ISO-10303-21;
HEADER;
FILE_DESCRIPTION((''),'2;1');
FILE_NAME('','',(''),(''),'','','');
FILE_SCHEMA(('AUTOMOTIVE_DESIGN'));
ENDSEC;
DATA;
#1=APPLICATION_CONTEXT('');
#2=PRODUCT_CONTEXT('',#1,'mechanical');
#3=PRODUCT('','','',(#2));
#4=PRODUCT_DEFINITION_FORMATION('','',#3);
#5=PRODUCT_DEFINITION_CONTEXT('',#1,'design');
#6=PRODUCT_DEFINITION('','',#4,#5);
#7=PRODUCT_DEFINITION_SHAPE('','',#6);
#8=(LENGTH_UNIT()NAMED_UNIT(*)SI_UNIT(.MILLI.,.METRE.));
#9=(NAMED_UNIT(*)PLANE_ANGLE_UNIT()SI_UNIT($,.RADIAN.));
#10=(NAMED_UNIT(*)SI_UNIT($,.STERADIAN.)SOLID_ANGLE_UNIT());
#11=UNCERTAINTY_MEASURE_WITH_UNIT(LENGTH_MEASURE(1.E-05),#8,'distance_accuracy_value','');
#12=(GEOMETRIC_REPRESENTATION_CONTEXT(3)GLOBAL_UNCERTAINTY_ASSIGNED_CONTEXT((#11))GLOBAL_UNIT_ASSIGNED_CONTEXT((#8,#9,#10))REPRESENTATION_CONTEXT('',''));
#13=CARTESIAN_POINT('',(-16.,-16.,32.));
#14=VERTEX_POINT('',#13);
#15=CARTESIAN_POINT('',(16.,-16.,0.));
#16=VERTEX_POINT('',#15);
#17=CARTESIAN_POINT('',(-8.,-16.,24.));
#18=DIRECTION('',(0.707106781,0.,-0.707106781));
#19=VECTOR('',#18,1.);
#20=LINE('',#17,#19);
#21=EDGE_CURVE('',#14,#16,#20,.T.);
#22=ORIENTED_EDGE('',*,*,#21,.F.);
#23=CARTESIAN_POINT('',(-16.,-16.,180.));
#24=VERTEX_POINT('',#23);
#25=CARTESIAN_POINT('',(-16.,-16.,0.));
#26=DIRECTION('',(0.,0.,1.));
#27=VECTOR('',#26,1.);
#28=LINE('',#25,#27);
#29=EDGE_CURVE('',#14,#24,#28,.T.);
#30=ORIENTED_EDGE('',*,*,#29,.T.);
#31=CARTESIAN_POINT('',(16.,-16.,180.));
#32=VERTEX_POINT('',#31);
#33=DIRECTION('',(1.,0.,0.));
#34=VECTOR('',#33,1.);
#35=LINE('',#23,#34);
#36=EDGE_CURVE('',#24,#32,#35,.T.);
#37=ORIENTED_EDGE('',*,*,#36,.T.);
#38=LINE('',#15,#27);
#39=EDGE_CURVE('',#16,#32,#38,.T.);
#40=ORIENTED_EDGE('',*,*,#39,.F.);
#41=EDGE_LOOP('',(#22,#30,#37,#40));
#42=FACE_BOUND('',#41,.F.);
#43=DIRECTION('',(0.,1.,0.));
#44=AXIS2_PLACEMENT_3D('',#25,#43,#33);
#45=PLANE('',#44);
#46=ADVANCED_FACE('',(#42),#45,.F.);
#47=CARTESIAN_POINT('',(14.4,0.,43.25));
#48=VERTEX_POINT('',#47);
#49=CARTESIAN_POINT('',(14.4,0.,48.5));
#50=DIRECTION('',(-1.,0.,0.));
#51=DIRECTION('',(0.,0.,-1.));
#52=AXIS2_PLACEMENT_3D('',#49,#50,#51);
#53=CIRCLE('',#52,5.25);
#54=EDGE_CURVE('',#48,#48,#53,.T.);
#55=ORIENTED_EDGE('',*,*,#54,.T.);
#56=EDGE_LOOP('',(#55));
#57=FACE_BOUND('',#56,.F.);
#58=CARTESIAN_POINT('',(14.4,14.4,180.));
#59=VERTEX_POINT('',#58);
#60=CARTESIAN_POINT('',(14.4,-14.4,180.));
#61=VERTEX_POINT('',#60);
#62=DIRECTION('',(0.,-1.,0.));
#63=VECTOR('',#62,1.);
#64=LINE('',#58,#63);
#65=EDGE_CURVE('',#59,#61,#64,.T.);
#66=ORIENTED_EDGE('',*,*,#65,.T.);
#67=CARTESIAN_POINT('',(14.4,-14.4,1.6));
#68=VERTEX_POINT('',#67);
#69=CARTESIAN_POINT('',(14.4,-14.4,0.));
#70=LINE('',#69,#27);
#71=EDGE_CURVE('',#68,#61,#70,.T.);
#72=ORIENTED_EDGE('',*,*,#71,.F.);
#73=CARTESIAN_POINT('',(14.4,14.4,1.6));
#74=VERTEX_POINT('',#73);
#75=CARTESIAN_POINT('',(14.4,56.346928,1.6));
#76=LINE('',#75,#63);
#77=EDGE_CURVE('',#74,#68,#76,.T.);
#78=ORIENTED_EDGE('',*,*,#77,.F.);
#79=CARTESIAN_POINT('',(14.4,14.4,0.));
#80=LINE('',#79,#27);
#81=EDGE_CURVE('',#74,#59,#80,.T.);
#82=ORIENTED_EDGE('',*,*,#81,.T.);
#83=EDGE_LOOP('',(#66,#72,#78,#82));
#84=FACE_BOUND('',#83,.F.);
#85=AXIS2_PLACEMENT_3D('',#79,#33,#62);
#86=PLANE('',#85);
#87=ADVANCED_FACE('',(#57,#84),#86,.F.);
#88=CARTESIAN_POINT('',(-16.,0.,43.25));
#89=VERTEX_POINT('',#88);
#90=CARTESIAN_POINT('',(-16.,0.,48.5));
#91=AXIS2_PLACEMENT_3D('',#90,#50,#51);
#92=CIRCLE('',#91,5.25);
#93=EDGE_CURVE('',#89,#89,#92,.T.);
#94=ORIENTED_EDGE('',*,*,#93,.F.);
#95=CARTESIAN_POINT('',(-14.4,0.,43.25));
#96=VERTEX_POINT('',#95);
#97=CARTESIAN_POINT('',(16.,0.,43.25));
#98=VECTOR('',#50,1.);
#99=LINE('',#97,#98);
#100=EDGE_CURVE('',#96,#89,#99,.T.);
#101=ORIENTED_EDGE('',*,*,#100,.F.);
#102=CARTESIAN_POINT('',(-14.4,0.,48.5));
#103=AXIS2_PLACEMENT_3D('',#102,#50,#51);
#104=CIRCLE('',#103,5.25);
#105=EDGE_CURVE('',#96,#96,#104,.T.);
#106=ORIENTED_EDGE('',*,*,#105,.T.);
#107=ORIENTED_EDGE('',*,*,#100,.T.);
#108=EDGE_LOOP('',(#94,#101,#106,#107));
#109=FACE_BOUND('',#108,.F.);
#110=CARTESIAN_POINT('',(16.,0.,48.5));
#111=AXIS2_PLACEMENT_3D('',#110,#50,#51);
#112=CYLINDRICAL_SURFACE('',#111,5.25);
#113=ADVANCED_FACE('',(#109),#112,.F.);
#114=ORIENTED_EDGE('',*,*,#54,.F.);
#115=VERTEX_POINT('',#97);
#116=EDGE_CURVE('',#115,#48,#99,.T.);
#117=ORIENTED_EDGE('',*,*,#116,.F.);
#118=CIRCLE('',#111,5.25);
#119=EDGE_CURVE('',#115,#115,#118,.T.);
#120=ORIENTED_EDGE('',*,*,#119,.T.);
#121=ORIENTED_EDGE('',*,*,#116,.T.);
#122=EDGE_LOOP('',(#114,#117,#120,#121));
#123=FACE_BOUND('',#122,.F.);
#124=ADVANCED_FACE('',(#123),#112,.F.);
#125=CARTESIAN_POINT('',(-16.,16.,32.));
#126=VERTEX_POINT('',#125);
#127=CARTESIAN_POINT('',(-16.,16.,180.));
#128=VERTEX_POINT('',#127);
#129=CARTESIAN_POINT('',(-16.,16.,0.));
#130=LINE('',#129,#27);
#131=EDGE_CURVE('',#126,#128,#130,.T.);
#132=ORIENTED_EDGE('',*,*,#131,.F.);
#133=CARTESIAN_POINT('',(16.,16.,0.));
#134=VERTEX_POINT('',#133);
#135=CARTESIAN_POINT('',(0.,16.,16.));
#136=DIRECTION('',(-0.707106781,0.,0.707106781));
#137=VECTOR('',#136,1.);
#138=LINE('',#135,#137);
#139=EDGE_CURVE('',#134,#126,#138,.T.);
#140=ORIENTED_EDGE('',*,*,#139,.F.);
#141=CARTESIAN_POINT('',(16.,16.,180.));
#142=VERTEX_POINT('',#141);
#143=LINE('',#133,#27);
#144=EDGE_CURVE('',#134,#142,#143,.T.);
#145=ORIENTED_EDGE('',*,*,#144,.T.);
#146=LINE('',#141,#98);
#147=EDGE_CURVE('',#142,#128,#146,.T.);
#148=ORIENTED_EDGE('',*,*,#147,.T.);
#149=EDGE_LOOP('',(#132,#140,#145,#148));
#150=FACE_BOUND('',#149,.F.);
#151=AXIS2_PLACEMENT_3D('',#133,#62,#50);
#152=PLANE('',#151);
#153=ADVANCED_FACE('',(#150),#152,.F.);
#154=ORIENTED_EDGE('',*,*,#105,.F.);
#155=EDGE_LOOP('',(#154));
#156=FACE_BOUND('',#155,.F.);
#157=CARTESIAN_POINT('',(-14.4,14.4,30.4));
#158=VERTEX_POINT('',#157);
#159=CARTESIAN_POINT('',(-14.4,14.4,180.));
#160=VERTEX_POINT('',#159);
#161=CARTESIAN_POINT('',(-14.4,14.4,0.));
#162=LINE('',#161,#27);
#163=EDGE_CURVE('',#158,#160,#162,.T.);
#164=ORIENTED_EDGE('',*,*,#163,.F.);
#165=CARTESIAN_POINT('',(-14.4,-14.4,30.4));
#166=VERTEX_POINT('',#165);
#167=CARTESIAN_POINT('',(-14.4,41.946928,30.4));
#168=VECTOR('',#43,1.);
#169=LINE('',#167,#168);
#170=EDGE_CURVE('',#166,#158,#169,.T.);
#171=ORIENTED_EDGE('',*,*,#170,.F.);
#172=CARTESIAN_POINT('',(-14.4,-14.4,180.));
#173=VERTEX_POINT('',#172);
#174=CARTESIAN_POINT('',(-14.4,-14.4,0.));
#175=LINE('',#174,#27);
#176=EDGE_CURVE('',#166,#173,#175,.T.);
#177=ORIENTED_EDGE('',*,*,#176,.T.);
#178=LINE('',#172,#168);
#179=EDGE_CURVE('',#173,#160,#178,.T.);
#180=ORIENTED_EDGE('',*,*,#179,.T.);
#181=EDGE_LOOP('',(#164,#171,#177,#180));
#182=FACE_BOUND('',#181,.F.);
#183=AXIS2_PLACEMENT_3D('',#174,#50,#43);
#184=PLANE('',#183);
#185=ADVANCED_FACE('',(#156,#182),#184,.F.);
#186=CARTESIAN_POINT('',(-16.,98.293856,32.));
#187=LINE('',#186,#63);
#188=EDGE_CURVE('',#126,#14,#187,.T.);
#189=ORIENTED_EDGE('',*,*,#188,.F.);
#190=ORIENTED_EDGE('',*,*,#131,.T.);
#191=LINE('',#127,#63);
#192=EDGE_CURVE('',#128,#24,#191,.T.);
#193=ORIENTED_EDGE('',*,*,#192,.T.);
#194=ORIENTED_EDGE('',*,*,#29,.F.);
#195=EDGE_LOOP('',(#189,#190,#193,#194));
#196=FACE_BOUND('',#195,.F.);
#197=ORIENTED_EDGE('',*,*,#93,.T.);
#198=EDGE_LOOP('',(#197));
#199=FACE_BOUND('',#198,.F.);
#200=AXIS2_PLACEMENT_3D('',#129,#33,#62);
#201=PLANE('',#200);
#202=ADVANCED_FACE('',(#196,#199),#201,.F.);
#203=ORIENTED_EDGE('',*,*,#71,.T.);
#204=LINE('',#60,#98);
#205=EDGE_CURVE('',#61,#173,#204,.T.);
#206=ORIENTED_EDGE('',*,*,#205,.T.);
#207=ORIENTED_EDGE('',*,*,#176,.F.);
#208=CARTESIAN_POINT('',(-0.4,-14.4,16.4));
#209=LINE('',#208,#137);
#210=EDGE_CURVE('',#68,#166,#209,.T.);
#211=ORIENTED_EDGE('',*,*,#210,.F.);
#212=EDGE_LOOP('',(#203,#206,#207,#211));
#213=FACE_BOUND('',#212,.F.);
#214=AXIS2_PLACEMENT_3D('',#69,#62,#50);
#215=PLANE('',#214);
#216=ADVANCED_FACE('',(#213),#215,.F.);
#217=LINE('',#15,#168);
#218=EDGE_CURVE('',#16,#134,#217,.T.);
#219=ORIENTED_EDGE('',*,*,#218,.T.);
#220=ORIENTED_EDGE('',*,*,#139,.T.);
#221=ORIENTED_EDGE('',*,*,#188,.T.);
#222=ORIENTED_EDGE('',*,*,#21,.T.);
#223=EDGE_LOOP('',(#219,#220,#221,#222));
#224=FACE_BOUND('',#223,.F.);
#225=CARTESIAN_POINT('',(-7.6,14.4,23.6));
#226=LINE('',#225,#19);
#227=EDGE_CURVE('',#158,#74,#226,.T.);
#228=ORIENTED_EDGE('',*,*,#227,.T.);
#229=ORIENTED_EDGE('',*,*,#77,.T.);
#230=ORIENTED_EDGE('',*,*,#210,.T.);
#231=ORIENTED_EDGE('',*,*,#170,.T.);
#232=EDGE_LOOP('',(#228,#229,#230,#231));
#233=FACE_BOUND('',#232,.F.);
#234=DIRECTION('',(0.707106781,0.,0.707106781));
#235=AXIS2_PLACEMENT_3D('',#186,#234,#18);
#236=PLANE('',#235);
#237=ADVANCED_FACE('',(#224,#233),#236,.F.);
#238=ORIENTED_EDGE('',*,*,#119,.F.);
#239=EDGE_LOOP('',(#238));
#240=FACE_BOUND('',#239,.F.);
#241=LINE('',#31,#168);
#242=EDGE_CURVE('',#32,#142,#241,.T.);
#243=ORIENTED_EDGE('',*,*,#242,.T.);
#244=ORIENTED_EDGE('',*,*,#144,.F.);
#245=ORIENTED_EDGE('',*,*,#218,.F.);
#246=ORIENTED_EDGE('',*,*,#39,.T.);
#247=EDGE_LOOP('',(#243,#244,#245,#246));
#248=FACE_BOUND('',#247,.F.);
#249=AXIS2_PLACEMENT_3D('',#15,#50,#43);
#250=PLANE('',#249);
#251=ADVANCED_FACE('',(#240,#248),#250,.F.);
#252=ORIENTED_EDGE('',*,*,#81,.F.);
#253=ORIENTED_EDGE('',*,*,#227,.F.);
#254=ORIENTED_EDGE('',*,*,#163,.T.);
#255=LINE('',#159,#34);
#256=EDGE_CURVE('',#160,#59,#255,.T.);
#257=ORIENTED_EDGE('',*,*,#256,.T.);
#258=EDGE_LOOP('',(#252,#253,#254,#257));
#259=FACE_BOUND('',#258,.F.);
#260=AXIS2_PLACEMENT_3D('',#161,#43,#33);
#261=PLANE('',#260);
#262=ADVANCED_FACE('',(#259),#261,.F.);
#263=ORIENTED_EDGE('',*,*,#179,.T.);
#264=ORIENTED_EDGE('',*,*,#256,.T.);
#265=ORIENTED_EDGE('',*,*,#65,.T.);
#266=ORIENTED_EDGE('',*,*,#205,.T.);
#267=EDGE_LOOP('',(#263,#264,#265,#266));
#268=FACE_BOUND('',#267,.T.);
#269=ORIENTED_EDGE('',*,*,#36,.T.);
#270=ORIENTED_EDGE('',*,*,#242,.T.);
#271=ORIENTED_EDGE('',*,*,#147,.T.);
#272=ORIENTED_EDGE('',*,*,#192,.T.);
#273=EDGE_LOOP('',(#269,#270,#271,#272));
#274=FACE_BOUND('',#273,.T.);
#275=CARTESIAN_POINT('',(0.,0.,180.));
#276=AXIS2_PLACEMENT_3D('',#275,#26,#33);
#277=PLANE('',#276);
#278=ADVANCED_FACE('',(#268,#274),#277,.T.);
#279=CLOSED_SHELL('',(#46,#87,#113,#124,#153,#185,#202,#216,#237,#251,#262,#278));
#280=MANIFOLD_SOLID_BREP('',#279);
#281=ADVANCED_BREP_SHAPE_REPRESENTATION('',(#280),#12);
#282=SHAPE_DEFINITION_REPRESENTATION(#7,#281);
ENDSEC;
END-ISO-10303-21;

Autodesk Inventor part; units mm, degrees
ref_plane "YZ Plane" through (0, 0, 0) normal (1, 0, 0) x (0, 1, 0)
ref_plane "XZ Plane" through (0, 0, 0) normal (0, 1, 0) x (-1, 0, 0)
ref_plane "XY Plane" through (0, 0, 0) normal (0, 0, 1) x (1, 0, 0)
sketch "スケッチ1" plane through (0, 0, 0) normal (0, 0, 1) x (1, 0, 0)
  line L0 (-16, -16) -> (16, -16)
  line L1 (16, -16) -> (16, 16)
  line L2 (16, 16) -> (-16, 16)
  line L3 (-16, 16) -> (-16, -16)
  line L4 (-16, -16) -> (16, 16) construction
  line L5 (16, -16) -> (-16, 16) construction
  line L6 (-14.4, 14.4) -> (14.4, 14.4)
  line L7 (14.4, 14.4) -> (14.4, -14.4)
  line L8 (14.4, -14.4) -> (-14.4, -14.4)
  line L9 (-14.4, -14.4) -> (-14.4, 14.4)
  point P0 (0, 0)
  dimension "d0" = 32
  dimension "d1" = 32
  dimension "d2" = 1.6
extrude "押し出し1" add sketch "スケッチ1" along normal blind 180
chamfer "面取り1" distance 32 angle 45 1 edges at (-16, 0, 0)
sketch "スケッチ2" plane through (16, -16, 180) normal (1, 0, 0) x (0, 0, -1)
  line L0 (0, 0) -> (0, 32) projected
  point P0 (180, 16)
  point P1 (131.5, 16)
  dimension "d8" = 131.5
hole "穴1" at (16, 0, 48.5) direction (-1, 0, 0) diameter 10.5 end through all
properties part number "PipeB"
